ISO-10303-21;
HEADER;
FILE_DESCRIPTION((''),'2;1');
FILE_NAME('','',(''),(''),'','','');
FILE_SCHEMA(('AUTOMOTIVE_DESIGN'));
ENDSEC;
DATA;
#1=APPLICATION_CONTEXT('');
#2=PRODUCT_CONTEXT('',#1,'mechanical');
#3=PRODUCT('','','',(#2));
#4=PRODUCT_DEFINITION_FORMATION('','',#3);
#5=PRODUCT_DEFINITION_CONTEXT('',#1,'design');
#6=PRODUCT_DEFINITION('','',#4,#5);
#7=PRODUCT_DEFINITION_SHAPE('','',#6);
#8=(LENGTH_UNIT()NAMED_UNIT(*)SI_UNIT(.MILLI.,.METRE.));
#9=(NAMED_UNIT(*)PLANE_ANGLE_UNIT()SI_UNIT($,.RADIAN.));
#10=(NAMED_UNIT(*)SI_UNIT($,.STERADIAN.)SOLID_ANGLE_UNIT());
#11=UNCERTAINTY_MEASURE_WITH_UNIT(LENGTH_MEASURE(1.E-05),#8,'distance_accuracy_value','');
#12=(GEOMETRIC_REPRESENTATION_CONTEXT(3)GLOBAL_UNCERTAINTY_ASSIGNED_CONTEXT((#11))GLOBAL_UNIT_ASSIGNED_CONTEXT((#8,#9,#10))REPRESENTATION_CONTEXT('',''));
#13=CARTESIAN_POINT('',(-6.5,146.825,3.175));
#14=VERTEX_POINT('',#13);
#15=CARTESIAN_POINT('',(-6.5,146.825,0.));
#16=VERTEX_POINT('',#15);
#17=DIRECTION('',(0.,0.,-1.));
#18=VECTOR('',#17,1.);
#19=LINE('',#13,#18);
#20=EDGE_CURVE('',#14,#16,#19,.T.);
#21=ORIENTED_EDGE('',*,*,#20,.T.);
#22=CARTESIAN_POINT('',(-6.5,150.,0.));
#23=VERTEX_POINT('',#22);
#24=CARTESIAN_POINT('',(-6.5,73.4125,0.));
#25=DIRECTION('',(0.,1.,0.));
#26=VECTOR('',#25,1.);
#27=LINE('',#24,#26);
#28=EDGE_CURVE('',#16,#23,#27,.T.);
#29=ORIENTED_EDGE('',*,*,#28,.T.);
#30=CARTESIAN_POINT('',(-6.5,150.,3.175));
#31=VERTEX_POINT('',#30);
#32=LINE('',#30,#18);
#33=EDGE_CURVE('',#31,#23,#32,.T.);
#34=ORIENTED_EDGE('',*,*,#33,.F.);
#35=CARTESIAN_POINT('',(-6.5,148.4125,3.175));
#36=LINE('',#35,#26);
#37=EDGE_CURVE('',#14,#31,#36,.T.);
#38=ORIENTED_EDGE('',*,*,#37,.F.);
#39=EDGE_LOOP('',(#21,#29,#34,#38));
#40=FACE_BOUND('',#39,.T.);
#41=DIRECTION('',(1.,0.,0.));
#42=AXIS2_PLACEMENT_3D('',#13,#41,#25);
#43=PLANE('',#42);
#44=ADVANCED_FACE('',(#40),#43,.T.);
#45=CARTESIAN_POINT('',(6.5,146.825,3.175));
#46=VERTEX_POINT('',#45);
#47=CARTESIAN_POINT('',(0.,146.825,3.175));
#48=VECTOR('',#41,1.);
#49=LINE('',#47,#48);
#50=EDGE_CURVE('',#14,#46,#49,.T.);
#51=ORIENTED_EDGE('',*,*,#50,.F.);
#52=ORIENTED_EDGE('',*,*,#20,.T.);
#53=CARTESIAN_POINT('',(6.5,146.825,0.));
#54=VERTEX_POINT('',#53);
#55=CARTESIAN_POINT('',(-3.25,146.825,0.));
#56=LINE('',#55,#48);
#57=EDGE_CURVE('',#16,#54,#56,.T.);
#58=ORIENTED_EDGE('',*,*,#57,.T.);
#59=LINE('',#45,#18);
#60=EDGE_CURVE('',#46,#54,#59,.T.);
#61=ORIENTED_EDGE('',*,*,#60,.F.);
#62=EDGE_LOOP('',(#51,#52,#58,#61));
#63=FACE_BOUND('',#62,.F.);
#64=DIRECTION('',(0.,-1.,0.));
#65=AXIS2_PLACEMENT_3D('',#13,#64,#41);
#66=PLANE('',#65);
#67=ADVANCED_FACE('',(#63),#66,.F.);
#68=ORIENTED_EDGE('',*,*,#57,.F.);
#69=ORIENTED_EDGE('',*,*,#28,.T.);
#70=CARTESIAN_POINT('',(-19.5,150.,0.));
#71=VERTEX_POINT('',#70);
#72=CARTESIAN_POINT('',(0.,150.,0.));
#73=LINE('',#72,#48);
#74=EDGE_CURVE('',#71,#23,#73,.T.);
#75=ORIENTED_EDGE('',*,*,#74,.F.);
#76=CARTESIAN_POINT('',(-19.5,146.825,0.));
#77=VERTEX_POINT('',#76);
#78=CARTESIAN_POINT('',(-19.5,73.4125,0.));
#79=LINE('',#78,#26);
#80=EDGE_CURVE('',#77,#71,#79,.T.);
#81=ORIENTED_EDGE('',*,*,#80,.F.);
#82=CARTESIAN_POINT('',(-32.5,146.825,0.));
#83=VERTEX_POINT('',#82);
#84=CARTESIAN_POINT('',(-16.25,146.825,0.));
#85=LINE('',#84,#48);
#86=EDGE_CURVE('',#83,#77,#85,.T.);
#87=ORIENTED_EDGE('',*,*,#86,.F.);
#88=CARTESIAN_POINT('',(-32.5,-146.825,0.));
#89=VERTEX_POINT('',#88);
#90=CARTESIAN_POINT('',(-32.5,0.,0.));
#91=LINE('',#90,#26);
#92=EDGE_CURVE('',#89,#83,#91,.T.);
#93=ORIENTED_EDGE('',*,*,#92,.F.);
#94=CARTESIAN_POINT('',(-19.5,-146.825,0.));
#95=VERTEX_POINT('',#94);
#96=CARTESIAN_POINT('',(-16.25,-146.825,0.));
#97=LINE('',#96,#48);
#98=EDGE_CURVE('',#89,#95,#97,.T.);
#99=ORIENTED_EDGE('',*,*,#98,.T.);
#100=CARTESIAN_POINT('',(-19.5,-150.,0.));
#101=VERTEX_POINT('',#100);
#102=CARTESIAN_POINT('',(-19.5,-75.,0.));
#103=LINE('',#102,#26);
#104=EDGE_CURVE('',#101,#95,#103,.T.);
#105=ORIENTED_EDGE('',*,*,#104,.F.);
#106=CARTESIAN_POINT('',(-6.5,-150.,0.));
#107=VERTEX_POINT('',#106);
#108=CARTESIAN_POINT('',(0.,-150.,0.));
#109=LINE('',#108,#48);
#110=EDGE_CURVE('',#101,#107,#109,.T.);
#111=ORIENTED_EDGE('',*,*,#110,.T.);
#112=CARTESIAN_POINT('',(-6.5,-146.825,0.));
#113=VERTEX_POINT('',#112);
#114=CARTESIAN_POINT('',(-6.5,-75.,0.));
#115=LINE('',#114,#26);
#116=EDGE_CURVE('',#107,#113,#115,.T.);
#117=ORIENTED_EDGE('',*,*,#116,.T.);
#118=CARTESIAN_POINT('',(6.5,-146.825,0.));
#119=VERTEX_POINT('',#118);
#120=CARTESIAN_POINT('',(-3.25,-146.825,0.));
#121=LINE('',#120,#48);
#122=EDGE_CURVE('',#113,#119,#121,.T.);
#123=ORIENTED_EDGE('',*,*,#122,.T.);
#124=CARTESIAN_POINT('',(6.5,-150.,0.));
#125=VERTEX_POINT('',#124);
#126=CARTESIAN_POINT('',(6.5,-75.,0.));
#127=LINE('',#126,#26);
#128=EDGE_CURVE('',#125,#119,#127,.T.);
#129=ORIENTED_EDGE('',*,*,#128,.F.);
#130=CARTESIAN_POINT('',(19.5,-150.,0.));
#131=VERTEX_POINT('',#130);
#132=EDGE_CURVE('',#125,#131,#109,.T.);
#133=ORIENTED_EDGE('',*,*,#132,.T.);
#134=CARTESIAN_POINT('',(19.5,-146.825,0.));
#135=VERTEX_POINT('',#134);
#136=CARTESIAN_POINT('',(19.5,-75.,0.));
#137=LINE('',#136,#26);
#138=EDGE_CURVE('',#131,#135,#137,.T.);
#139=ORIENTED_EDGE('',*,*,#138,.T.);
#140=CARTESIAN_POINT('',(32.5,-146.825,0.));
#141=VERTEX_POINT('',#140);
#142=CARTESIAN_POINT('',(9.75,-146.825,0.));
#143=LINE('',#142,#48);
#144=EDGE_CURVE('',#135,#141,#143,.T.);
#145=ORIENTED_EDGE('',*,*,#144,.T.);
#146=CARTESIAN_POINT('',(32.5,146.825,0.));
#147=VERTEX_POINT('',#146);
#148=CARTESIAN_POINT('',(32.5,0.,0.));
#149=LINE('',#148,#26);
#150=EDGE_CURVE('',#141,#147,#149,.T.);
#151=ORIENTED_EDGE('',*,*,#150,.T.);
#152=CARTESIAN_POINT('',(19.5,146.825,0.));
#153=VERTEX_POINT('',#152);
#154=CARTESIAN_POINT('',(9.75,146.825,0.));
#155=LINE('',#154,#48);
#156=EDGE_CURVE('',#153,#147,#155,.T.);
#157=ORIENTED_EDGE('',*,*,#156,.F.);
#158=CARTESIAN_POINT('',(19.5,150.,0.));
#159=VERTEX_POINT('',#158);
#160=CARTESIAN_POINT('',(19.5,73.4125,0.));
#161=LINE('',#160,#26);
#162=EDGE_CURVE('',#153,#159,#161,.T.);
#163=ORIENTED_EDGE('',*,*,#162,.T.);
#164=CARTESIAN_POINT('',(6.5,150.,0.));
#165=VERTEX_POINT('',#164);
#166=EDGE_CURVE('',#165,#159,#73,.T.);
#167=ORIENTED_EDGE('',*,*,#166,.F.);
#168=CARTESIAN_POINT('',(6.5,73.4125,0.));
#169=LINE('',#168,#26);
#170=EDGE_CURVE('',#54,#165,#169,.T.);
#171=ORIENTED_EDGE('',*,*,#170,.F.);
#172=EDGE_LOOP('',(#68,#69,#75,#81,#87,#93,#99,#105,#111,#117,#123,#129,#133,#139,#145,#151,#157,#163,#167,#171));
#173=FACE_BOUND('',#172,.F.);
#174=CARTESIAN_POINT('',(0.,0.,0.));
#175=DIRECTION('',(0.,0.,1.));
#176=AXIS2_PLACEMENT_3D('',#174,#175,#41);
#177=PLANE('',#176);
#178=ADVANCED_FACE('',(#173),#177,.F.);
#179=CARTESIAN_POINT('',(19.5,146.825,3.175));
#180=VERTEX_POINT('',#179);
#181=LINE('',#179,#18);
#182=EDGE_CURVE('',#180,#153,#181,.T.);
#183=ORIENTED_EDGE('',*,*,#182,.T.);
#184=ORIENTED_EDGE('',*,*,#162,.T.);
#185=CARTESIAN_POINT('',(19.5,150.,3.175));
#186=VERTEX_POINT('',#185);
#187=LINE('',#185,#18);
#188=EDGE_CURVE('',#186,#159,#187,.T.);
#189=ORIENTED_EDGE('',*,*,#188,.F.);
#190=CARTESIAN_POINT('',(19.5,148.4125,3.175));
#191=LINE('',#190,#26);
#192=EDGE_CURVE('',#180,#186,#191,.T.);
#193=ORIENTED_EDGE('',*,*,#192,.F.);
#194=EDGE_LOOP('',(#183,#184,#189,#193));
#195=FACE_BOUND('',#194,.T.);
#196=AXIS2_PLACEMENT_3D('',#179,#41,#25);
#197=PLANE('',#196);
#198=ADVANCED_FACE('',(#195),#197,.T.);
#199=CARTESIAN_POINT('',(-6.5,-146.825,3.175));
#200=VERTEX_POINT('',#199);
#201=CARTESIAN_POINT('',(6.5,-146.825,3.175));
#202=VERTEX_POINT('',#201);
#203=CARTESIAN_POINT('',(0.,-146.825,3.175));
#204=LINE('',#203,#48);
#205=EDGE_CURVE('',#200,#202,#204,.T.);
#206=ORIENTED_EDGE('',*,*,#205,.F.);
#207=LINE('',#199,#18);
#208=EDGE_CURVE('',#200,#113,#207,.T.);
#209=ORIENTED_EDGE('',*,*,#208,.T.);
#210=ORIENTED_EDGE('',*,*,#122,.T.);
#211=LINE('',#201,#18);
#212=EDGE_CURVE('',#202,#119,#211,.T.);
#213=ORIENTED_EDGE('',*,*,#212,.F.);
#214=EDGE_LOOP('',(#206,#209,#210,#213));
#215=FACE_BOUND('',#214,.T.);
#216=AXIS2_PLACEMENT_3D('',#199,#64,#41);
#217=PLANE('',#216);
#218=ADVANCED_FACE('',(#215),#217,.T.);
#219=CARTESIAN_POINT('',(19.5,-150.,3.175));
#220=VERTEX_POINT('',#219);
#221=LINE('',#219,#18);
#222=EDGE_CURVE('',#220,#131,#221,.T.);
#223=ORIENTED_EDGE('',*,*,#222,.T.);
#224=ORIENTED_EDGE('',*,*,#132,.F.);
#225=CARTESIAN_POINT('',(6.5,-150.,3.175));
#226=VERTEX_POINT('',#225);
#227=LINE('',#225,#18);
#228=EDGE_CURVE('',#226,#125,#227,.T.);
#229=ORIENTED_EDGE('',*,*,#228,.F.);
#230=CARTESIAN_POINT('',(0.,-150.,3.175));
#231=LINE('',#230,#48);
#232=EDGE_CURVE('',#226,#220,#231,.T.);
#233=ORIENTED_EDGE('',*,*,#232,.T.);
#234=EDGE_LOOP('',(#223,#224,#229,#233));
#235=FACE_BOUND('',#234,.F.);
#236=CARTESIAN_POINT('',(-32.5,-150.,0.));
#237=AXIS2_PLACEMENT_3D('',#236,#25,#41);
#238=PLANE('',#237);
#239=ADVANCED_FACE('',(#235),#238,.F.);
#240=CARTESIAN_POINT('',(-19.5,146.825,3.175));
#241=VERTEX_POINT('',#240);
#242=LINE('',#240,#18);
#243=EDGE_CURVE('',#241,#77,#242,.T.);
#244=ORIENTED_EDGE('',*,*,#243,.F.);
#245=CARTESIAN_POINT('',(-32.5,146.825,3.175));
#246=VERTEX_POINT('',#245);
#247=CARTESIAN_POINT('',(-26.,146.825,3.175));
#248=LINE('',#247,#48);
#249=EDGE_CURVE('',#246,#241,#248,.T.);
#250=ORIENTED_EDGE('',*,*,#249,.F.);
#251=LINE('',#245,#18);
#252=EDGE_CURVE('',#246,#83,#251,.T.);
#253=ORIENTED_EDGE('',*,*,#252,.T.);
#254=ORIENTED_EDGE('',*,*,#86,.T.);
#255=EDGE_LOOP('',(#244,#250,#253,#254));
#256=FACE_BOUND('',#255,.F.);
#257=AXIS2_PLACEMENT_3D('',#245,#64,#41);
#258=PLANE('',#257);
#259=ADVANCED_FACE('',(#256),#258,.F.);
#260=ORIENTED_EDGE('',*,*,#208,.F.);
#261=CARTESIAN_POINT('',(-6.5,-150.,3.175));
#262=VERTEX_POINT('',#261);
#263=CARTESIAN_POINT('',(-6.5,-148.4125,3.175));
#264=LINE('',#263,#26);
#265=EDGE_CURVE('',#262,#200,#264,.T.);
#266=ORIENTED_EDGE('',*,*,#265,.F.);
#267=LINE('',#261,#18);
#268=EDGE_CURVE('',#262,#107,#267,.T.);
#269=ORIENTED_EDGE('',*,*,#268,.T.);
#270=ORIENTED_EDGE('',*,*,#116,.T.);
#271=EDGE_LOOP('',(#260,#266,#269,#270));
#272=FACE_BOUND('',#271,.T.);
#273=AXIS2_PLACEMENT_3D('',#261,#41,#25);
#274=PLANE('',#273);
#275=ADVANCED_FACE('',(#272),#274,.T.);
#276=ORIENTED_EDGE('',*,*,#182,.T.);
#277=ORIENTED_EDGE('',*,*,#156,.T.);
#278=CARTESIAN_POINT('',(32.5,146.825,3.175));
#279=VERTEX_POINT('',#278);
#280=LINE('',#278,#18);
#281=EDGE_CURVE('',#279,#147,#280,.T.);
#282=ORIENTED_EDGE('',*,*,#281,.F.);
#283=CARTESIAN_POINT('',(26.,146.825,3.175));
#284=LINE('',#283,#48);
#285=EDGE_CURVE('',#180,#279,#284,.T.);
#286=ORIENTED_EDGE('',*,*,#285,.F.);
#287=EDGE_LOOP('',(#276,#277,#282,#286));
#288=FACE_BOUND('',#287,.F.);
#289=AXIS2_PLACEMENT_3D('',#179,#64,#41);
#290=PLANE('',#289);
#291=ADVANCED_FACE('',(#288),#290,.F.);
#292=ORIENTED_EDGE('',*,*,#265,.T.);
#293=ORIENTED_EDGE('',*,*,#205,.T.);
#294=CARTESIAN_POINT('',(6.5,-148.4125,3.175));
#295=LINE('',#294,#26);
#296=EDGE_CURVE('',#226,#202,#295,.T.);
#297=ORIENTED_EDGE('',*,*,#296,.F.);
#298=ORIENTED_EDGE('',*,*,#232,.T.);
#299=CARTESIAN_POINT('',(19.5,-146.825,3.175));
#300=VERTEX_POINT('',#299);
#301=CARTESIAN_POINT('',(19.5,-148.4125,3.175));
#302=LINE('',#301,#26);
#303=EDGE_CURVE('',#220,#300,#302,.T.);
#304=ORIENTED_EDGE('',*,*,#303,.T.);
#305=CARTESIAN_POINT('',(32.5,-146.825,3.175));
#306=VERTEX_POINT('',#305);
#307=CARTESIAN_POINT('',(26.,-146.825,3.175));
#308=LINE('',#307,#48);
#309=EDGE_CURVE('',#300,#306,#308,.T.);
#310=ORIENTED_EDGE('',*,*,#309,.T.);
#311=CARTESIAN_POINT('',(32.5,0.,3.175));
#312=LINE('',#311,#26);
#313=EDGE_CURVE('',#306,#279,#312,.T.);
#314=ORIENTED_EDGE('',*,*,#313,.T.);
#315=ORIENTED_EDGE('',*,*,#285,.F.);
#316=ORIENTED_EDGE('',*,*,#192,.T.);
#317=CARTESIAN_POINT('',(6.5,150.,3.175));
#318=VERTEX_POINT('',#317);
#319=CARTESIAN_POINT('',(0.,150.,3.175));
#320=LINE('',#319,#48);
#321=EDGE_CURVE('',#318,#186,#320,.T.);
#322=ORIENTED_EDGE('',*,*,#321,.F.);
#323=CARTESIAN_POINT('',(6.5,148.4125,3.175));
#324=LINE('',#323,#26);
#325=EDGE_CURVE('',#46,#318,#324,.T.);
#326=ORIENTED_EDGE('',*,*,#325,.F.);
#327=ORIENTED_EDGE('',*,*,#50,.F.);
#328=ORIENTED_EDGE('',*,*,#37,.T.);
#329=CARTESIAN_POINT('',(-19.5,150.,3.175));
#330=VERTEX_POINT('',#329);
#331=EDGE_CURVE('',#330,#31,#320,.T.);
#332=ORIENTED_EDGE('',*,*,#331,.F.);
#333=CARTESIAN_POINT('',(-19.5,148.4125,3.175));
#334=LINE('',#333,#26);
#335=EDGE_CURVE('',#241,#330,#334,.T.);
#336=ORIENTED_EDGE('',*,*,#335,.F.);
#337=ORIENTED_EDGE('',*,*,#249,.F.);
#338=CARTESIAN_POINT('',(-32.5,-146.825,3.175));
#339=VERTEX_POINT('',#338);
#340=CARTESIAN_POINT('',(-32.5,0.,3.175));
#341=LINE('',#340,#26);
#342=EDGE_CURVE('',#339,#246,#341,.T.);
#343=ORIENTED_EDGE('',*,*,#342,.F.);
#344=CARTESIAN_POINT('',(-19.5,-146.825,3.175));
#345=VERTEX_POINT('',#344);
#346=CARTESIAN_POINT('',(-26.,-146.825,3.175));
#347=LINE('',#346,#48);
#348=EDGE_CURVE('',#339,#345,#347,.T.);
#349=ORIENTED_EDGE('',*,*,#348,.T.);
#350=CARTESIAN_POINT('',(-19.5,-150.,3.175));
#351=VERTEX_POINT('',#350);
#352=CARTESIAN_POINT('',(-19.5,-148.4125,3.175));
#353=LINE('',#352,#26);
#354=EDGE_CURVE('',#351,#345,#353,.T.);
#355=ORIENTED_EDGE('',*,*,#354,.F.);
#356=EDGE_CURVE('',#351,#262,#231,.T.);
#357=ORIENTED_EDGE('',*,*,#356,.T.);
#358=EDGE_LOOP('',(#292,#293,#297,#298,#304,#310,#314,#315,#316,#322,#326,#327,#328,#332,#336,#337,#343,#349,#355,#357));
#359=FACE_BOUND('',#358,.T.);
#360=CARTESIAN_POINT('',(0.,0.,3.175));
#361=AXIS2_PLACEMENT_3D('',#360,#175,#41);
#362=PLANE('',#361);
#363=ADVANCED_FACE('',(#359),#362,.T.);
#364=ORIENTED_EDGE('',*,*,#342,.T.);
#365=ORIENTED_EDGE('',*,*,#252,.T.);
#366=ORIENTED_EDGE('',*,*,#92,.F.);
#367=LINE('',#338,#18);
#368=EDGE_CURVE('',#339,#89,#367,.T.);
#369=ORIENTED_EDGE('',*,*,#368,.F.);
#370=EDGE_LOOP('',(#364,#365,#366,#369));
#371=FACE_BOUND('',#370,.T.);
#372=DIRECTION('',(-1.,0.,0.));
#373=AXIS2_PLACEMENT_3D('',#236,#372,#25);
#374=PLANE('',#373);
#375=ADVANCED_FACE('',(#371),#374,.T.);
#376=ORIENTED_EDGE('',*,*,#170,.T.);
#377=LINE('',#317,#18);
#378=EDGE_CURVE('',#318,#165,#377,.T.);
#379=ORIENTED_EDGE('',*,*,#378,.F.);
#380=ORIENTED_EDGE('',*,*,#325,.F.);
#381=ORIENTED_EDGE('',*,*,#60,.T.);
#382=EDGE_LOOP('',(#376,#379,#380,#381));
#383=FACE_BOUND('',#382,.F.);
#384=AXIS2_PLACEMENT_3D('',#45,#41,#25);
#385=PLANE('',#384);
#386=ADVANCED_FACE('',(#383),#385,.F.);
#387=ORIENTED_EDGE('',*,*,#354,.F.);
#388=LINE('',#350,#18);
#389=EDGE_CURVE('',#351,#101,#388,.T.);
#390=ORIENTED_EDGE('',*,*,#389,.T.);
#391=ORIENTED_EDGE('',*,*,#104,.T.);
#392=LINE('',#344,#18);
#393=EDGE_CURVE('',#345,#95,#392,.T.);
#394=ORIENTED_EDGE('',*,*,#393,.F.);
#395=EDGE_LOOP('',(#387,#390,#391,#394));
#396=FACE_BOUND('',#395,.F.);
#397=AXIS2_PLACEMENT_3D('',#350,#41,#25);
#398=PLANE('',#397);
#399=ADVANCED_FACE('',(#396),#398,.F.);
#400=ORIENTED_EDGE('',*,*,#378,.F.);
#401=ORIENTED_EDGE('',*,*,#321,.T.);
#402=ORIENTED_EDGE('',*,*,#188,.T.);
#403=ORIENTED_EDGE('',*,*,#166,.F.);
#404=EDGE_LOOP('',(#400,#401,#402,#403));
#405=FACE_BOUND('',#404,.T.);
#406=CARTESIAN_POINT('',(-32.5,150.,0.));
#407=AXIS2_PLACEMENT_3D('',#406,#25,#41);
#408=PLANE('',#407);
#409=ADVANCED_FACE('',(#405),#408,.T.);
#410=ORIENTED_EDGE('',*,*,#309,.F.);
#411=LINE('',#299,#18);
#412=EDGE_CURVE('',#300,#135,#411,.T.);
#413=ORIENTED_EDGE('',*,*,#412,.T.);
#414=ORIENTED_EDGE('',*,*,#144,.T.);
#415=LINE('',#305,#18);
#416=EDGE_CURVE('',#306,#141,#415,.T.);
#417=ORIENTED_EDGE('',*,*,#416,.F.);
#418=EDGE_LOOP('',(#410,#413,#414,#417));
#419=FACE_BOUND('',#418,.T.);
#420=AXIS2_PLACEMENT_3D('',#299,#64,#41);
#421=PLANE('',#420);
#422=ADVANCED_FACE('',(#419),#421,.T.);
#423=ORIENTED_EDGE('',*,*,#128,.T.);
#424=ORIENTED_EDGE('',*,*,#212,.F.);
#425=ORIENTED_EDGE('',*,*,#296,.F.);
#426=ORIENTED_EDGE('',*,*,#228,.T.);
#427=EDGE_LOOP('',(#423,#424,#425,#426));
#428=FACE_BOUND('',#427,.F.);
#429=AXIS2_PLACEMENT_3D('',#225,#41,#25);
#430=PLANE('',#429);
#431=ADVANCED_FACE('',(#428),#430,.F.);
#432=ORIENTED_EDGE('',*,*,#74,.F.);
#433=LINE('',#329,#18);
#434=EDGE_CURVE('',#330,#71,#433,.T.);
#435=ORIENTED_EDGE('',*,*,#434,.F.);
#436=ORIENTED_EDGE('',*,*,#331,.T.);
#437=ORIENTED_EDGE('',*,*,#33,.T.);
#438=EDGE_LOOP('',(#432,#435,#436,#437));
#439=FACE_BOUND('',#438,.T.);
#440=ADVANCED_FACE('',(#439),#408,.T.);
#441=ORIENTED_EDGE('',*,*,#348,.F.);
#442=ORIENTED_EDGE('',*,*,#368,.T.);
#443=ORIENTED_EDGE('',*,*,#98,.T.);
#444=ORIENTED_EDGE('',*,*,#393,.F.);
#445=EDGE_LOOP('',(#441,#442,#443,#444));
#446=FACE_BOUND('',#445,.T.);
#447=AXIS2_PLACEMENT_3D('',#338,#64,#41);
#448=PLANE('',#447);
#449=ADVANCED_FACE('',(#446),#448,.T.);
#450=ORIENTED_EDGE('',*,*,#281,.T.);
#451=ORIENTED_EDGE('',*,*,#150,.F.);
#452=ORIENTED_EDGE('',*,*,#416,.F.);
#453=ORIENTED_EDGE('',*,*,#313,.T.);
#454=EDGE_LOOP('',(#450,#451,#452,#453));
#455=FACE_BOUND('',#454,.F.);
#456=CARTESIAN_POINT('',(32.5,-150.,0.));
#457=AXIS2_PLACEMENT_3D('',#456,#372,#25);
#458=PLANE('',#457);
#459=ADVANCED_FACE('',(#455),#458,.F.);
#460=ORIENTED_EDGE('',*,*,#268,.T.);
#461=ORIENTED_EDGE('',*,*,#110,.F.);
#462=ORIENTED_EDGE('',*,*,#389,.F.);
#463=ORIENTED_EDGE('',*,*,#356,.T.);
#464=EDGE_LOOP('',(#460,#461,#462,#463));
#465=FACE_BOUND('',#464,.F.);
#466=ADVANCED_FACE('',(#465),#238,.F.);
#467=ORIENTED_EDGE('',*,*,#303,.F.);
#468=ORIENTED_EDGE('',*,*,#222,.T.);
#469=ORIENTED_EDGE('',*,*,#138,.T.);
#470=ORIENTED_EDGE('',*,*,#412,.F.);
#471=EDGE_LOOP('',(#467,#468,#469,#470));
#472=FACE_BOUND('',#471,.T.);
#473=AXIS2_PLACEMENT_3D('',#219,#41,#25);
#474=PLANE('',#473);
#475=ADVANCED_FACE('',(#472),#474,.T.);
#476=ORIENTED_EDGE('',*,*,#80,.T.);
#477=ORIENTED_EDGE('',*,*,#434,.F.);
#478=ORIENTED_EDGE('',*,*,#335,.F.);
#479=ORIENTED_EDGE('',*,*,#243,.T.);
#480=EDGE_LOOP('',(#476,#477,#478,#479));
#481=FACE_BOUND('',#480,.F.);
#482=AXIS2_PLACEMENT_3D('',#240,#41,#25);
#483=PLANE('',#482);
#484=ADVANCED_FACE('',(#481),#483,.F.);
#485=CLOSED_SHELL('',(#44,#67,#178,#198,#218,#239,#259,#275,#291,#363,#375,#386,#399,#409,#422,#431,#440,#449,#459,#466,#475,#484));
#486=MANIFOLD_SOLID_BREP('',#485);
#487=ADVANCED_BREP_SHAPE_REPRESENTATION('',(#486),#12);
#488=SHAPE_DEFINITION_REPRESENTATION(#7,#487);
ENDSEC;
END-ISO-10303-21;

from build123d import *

# Parameters (mm, degrees)
F0_W     = 65
F0_H     = 300
F1_DEPTH = 3.175
F2_W     = 13
F2_H     = 3.175
F3_DEPTH = 3.176


# Not quite as in the source:
# - a length typed as a fraction of an inch, garbled in the dataset ("3 / 203.2 mm" for 3/8 in), is restored


with BuildPart() as f1:
    # F0 (on Top) → F1 (new body)
    with BuildSketch(Plane.XY):
        Rectangle(F0_W, F0_H)
    extrude(amount=F1_DEPTH)

    # F2 (on face) → F3 (cut, through all)
    with BuildSketch(Plane.XY.offset(3.175)):
        with Locations((-26, -148.4125)):
            Rectangle(F2_W, F2_H)
        with Locations((-26, 148.4125)):
            Rectangle(F2_W, F2_H)
        with Locations((0, -148.4125)):
            Rectangle(F2_W, F2_H)
        with Locations((0, 148.4125)):
            Rectangle(F2_W, F2_H)
        with Locations((26, -148.4125)):
            Rectangle(F2_W, F2_H)
        with Locations((26, 148.4125)):
            Rectangle(F2_W, F2_H)
    extrude(amount=-F3_DEPTH, mode=Mode.SUBTRACT)


solid = f1.part
